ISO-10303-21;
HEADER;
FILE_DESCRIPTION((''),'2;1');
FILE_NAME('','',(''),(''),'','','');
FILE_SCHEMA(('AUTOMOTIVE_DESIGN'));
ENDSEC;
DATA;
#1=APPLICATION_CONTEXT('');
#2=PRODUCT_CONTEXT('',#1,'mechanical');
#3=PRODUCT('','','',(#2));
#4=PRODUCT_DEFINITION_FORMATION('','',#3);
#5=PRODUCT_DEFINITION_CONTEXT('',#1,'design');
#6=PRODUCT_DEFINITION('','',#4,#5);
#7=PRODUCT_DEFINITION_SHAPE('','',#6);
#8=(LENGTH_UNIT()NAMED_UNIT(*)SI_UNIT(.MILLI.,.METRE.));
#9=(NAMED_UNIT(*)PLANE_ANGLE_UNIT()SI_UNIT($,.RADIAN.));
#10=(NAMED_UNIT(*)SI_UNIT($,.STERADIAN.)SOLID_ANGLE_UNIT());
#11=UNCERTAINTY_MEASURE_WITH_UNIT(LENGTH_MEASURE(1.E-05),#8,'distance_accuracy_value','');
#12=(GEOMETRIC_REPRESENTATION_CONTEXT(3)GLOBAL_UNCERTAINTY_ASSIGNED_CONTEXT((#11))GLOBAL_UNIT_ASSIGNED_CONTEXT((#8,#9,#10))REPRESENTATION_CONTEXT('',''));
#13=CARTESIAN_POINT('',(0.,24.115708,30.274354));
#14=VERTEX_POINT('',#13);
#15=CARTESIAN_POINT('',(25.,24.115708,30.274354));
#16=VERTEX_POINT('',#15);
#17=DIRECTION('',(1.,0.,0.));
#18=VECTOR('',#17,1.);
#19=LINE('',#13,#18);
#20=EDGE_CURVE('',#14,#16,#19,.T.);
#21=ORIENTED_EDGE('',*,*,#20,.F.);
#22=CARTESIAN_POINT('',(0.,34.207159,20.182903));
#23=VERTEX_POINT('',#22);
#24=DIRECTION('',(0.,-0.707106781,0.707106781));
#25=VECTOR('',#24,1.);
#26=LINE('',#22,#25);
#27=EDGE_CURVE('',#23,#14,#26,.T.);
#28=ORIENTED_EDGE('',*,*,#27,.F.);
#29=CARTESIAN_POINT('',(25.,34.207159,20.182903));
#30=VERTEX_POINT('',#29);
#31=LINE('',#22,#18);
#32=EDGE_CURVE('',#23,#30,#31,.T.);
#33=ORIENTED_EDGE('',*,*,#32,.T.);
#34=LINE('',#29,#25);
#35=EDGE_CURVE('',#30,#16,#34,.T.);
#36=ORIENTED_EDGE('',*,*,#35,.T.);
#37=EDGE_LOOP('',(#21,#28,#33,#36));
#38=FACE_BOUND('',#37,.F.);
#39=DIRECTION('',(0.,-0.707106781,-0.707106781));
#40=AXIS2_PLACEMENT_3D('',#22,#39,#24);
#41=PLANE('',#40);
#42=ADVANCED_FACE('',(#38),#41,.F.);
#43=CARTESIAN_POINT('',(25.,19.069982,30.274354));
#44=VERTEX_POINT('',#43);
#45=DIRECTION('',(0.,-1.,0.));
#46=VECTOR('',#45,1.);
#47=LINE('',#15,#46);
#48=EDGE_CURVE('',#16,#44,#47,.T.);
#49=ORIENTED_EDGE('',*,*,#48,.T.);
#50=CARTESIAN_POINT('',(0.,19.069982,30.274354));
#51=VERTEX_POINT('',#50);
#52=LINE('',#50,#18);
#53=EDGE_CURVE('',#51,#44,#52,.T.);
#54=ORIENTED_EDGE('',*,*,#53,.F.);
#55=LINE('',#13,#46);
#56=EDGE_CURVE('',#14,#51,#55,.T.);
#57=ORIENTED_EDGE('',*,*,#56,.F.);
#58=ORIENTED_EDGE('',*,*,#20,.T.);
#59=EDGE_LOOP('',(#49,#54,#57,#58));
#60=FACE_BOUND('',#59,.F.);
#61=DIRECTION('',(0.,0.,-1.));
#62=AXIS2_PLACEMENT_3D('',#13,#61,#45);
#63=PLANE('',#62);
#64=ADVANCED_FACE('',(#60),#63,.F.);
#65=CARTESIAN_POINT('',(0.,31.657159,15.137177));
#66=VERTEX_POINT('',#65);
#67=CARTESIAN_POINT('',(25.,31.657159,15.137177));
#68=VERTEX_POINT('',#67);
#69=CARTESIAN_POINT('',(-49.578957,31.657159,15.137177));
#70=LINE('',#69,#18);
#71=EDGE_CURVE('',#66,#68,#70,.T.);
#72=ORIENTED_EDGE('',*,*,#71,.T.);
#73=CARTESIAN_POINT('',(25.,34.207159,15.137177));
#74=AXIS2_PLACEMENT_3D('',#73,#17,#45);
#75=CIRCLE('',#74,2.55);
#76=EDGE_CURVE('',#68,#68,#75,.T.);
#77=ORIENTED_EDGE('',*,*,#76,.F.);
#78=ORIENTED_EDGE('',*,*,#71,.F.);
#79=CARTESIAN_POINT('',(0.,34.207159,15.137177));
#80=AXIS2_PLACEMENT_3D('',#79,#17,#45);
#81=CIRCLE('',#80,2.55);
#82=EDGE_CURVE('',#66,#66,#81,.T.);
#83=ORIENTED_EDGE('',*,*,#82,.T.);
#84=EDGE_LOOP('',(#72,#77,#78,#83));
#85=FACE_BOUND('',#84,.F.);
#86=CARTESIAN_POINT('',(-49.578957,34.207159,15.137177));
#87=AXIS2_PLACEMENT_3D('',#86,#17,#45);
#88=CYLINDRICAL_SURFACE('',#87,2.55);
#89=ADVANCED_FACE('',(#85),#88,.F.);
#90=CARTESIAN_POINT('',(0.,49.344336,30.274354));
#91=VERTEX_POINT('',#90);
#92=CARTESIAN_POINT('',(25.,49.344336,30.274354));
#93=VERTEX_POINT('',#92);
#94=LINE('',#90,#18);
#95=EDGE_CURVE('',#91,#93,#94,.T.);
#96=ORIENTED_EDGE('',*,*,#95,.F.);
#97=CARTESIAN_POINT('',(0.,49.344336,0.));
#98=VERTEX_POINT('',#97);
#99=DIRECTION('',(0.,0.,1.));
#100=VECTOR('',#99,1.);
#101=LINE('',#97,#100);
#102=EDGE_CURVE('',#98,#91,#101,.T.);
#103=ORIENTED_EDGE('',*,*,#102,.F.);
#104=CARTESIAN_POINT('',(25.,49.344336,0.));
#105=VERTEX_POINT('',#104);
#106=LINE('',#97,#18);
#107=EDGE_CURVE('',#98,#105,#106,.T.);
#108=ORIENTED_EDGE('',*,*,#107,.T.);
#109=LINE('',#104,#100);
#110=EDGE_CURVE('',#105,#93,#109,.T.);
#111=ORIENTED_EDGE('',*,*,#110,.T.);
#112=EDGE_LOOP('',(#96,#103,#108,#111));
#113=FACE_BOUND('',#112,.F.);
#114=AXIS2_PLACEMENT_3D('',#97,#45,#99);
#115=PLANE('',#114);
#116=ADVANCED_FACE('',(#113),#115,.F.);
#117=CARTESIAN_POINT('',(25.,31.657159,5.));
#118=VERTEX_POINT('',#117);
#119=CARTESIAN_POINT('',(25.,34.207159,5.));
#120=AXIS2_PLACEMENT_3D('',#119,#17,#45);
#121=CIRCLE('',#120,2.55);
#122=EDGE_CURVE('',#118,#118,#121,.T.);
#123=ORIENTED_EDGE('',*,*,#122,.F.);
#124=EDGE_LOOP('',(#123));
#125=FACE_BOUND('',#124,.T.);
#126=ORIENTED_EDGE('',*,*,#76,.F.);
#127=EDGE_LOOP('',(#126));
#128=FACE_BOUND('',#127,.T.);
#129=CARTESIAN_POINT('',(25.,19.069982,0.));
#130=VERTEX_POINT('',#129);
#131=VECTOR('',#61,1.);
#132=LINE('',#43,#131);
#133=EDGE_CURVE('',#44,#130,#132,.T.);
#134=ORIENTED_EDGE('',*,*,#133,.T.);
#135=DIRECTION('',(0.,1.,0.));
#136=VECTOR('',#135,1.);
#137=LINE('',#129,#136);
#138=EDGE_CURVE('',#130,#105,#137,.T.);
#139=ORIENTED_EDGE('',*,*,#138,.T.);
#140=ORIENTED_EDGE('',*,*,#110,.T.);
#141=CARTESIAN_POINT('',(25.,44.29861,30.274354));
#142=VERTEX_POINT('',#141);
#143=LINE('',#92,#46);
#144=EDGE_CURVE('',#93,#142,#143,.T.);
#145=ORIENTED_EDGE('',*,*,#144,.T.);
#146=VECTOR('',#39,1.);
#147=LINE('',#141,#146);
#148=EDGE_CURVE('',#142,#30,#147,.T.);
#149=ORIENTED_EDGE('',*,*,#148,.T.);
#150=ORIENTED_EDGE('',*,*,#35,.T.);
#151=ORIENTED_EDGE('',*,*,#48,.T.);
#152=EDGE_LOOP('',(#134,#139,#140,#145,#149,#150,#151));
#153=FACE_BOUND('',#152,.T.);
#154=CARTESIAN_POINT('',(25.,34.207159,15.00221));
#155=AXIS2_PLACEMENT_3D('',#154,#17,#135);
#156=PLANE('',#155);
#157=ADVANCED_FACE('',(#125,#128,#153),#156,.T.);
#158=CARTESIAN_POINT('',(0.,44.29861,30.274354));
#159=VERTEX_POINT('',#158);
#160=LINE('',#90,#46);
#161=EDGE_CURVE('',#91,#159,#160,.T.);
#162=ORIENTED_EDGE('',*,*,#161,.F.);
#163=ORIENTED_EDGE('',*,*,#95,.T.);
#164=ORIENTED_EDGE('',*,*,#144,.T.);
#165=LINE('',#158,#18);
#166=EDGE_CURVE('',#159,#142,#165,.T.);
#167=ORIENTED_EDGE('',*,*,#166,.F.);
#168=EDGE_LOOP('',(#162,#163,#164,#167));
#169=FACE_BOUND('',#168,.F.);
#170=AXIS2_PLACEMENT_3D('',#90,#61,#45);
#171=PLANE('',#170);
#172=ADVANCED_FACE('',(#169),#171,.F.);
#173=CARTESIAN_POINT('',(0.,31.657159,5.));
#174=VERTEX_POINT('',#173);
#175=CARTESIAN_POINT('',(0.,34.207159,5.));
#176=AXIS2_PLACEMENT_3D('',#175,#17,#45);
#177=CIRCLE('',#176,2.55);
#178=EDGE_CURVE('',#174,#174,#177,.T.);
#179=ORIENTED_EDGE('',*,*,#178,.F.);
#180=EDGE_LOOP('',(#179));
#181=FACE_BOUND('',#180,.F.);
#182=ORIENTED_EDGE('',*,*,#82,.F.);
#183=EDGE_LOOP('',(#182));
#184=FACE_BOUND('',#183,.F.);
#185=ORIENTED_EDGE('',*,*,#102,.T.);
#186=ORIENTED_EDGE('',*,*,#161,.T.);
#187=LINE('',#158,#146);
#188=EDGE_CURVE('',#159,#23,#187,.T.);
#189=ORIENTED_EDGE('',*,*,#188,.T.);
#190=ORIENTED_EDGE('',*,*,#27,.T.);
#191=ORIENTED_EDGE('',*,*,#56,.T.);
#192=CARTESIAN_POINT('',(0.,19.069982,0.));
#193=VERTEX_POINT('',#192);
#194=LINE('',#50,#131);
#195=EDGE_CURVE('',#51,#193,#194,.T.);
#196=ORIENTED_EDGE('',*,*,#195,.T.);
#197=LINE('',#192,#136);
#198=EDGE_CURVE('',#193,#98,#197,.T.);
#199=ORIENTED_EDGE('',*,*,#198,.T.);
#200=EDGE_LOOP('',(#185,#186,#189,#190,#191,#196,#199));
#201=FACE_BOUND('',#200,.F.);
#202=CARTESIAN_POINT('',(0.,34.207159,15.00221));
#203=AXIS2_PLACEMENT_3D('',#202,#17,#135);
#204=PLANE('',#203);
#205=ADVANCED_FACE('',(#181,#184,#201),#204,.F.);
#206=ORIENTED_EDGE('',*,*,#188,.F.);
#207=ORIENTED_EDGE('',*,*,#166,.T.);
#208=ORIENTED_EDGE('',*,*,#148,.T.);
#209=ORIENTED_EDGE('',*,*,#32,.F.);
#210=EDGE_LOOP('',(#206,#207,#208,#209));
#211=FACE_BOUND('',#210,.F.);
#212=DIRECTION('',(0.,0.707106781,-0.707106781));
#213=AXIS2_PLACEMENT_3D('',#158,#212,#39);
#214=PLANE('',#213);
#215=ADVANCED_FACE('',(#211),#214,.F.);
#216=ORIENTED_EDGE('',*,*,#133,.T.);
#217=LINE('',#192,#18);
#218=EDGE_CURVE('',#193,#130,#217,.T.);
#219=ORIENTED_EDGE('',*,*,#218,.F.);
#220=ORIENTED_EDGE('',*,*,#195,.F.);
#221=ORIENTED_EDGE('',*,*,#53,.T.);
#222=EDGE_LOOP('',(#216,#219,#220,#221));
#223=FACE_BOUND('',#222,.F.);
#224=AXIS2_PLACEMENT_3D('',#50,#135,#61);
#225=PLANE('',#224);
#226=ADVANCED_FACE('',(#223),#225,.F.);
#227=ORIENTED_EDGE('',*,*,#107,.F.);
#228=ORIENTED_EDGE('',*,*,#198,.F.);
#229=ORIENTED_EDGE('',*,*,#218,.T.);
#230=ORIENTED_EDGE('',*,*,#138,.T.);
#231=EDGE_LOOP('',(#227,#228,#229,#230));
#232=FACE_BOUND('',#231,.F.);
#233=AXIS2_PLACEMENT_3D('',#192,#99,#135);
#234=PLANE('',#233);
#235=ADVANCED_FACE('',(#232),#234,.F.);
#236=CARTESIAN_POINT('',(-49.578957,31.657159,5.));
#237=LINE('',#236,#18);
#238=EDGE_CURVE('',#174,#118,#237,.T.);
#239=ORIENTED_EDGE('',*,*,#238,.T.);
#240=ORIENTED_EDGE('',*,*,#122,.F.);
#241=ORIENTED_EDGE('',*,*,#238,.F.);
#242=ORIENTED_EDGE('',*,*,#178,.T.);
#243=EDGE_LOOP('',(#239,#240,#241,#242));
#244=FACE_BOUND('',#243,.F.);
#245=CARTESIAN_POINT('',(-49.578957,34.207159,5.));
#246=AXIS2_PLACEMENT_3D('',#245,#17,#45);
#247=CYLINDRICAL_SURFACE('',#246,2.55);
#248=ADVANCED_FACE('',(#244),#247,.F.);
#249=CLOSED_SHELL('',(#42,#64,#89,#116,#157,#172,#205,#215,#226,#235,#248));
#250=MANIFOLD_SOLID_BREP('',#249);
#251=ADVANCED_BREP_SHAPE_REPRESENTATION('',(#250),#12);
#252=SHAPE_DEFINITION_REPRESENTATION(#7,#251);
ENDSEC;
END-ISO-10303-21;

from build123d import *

# Parameters (mm, degrees)
F1_DEPTH = 25
F2_D     = 5.1


# Not quite as in the source:
# - a feature names something its author has since deleted; it is built from what else it names


with BuildPart() as f1:
    # F0 (on Right) → F1 (new body)
    with BuildSketch(Plane.YZ):
        Polygon((24.1157077886, 30.274353966), (19.0699821276, 30.274353966), (19.0699821276, 0), (49.3443360936, 0), (49.3443360936, 30.274353966), (44.2986104326, 30.274353966), (34.2071591106, 20.182902644), align=None)
    extrude(amount=F1_DEPTH)

    # F2 (through all)
    with Locations(Plane(origin=(0, 0, 0), x_dir=(0, 1, 0), z_dir=(-1, 0, 0))):
        with Locations((34.2071591106, -5), (34.2071591106, -15.137176983)):
            Hole(F2_D / 2)


solid = f1.part
